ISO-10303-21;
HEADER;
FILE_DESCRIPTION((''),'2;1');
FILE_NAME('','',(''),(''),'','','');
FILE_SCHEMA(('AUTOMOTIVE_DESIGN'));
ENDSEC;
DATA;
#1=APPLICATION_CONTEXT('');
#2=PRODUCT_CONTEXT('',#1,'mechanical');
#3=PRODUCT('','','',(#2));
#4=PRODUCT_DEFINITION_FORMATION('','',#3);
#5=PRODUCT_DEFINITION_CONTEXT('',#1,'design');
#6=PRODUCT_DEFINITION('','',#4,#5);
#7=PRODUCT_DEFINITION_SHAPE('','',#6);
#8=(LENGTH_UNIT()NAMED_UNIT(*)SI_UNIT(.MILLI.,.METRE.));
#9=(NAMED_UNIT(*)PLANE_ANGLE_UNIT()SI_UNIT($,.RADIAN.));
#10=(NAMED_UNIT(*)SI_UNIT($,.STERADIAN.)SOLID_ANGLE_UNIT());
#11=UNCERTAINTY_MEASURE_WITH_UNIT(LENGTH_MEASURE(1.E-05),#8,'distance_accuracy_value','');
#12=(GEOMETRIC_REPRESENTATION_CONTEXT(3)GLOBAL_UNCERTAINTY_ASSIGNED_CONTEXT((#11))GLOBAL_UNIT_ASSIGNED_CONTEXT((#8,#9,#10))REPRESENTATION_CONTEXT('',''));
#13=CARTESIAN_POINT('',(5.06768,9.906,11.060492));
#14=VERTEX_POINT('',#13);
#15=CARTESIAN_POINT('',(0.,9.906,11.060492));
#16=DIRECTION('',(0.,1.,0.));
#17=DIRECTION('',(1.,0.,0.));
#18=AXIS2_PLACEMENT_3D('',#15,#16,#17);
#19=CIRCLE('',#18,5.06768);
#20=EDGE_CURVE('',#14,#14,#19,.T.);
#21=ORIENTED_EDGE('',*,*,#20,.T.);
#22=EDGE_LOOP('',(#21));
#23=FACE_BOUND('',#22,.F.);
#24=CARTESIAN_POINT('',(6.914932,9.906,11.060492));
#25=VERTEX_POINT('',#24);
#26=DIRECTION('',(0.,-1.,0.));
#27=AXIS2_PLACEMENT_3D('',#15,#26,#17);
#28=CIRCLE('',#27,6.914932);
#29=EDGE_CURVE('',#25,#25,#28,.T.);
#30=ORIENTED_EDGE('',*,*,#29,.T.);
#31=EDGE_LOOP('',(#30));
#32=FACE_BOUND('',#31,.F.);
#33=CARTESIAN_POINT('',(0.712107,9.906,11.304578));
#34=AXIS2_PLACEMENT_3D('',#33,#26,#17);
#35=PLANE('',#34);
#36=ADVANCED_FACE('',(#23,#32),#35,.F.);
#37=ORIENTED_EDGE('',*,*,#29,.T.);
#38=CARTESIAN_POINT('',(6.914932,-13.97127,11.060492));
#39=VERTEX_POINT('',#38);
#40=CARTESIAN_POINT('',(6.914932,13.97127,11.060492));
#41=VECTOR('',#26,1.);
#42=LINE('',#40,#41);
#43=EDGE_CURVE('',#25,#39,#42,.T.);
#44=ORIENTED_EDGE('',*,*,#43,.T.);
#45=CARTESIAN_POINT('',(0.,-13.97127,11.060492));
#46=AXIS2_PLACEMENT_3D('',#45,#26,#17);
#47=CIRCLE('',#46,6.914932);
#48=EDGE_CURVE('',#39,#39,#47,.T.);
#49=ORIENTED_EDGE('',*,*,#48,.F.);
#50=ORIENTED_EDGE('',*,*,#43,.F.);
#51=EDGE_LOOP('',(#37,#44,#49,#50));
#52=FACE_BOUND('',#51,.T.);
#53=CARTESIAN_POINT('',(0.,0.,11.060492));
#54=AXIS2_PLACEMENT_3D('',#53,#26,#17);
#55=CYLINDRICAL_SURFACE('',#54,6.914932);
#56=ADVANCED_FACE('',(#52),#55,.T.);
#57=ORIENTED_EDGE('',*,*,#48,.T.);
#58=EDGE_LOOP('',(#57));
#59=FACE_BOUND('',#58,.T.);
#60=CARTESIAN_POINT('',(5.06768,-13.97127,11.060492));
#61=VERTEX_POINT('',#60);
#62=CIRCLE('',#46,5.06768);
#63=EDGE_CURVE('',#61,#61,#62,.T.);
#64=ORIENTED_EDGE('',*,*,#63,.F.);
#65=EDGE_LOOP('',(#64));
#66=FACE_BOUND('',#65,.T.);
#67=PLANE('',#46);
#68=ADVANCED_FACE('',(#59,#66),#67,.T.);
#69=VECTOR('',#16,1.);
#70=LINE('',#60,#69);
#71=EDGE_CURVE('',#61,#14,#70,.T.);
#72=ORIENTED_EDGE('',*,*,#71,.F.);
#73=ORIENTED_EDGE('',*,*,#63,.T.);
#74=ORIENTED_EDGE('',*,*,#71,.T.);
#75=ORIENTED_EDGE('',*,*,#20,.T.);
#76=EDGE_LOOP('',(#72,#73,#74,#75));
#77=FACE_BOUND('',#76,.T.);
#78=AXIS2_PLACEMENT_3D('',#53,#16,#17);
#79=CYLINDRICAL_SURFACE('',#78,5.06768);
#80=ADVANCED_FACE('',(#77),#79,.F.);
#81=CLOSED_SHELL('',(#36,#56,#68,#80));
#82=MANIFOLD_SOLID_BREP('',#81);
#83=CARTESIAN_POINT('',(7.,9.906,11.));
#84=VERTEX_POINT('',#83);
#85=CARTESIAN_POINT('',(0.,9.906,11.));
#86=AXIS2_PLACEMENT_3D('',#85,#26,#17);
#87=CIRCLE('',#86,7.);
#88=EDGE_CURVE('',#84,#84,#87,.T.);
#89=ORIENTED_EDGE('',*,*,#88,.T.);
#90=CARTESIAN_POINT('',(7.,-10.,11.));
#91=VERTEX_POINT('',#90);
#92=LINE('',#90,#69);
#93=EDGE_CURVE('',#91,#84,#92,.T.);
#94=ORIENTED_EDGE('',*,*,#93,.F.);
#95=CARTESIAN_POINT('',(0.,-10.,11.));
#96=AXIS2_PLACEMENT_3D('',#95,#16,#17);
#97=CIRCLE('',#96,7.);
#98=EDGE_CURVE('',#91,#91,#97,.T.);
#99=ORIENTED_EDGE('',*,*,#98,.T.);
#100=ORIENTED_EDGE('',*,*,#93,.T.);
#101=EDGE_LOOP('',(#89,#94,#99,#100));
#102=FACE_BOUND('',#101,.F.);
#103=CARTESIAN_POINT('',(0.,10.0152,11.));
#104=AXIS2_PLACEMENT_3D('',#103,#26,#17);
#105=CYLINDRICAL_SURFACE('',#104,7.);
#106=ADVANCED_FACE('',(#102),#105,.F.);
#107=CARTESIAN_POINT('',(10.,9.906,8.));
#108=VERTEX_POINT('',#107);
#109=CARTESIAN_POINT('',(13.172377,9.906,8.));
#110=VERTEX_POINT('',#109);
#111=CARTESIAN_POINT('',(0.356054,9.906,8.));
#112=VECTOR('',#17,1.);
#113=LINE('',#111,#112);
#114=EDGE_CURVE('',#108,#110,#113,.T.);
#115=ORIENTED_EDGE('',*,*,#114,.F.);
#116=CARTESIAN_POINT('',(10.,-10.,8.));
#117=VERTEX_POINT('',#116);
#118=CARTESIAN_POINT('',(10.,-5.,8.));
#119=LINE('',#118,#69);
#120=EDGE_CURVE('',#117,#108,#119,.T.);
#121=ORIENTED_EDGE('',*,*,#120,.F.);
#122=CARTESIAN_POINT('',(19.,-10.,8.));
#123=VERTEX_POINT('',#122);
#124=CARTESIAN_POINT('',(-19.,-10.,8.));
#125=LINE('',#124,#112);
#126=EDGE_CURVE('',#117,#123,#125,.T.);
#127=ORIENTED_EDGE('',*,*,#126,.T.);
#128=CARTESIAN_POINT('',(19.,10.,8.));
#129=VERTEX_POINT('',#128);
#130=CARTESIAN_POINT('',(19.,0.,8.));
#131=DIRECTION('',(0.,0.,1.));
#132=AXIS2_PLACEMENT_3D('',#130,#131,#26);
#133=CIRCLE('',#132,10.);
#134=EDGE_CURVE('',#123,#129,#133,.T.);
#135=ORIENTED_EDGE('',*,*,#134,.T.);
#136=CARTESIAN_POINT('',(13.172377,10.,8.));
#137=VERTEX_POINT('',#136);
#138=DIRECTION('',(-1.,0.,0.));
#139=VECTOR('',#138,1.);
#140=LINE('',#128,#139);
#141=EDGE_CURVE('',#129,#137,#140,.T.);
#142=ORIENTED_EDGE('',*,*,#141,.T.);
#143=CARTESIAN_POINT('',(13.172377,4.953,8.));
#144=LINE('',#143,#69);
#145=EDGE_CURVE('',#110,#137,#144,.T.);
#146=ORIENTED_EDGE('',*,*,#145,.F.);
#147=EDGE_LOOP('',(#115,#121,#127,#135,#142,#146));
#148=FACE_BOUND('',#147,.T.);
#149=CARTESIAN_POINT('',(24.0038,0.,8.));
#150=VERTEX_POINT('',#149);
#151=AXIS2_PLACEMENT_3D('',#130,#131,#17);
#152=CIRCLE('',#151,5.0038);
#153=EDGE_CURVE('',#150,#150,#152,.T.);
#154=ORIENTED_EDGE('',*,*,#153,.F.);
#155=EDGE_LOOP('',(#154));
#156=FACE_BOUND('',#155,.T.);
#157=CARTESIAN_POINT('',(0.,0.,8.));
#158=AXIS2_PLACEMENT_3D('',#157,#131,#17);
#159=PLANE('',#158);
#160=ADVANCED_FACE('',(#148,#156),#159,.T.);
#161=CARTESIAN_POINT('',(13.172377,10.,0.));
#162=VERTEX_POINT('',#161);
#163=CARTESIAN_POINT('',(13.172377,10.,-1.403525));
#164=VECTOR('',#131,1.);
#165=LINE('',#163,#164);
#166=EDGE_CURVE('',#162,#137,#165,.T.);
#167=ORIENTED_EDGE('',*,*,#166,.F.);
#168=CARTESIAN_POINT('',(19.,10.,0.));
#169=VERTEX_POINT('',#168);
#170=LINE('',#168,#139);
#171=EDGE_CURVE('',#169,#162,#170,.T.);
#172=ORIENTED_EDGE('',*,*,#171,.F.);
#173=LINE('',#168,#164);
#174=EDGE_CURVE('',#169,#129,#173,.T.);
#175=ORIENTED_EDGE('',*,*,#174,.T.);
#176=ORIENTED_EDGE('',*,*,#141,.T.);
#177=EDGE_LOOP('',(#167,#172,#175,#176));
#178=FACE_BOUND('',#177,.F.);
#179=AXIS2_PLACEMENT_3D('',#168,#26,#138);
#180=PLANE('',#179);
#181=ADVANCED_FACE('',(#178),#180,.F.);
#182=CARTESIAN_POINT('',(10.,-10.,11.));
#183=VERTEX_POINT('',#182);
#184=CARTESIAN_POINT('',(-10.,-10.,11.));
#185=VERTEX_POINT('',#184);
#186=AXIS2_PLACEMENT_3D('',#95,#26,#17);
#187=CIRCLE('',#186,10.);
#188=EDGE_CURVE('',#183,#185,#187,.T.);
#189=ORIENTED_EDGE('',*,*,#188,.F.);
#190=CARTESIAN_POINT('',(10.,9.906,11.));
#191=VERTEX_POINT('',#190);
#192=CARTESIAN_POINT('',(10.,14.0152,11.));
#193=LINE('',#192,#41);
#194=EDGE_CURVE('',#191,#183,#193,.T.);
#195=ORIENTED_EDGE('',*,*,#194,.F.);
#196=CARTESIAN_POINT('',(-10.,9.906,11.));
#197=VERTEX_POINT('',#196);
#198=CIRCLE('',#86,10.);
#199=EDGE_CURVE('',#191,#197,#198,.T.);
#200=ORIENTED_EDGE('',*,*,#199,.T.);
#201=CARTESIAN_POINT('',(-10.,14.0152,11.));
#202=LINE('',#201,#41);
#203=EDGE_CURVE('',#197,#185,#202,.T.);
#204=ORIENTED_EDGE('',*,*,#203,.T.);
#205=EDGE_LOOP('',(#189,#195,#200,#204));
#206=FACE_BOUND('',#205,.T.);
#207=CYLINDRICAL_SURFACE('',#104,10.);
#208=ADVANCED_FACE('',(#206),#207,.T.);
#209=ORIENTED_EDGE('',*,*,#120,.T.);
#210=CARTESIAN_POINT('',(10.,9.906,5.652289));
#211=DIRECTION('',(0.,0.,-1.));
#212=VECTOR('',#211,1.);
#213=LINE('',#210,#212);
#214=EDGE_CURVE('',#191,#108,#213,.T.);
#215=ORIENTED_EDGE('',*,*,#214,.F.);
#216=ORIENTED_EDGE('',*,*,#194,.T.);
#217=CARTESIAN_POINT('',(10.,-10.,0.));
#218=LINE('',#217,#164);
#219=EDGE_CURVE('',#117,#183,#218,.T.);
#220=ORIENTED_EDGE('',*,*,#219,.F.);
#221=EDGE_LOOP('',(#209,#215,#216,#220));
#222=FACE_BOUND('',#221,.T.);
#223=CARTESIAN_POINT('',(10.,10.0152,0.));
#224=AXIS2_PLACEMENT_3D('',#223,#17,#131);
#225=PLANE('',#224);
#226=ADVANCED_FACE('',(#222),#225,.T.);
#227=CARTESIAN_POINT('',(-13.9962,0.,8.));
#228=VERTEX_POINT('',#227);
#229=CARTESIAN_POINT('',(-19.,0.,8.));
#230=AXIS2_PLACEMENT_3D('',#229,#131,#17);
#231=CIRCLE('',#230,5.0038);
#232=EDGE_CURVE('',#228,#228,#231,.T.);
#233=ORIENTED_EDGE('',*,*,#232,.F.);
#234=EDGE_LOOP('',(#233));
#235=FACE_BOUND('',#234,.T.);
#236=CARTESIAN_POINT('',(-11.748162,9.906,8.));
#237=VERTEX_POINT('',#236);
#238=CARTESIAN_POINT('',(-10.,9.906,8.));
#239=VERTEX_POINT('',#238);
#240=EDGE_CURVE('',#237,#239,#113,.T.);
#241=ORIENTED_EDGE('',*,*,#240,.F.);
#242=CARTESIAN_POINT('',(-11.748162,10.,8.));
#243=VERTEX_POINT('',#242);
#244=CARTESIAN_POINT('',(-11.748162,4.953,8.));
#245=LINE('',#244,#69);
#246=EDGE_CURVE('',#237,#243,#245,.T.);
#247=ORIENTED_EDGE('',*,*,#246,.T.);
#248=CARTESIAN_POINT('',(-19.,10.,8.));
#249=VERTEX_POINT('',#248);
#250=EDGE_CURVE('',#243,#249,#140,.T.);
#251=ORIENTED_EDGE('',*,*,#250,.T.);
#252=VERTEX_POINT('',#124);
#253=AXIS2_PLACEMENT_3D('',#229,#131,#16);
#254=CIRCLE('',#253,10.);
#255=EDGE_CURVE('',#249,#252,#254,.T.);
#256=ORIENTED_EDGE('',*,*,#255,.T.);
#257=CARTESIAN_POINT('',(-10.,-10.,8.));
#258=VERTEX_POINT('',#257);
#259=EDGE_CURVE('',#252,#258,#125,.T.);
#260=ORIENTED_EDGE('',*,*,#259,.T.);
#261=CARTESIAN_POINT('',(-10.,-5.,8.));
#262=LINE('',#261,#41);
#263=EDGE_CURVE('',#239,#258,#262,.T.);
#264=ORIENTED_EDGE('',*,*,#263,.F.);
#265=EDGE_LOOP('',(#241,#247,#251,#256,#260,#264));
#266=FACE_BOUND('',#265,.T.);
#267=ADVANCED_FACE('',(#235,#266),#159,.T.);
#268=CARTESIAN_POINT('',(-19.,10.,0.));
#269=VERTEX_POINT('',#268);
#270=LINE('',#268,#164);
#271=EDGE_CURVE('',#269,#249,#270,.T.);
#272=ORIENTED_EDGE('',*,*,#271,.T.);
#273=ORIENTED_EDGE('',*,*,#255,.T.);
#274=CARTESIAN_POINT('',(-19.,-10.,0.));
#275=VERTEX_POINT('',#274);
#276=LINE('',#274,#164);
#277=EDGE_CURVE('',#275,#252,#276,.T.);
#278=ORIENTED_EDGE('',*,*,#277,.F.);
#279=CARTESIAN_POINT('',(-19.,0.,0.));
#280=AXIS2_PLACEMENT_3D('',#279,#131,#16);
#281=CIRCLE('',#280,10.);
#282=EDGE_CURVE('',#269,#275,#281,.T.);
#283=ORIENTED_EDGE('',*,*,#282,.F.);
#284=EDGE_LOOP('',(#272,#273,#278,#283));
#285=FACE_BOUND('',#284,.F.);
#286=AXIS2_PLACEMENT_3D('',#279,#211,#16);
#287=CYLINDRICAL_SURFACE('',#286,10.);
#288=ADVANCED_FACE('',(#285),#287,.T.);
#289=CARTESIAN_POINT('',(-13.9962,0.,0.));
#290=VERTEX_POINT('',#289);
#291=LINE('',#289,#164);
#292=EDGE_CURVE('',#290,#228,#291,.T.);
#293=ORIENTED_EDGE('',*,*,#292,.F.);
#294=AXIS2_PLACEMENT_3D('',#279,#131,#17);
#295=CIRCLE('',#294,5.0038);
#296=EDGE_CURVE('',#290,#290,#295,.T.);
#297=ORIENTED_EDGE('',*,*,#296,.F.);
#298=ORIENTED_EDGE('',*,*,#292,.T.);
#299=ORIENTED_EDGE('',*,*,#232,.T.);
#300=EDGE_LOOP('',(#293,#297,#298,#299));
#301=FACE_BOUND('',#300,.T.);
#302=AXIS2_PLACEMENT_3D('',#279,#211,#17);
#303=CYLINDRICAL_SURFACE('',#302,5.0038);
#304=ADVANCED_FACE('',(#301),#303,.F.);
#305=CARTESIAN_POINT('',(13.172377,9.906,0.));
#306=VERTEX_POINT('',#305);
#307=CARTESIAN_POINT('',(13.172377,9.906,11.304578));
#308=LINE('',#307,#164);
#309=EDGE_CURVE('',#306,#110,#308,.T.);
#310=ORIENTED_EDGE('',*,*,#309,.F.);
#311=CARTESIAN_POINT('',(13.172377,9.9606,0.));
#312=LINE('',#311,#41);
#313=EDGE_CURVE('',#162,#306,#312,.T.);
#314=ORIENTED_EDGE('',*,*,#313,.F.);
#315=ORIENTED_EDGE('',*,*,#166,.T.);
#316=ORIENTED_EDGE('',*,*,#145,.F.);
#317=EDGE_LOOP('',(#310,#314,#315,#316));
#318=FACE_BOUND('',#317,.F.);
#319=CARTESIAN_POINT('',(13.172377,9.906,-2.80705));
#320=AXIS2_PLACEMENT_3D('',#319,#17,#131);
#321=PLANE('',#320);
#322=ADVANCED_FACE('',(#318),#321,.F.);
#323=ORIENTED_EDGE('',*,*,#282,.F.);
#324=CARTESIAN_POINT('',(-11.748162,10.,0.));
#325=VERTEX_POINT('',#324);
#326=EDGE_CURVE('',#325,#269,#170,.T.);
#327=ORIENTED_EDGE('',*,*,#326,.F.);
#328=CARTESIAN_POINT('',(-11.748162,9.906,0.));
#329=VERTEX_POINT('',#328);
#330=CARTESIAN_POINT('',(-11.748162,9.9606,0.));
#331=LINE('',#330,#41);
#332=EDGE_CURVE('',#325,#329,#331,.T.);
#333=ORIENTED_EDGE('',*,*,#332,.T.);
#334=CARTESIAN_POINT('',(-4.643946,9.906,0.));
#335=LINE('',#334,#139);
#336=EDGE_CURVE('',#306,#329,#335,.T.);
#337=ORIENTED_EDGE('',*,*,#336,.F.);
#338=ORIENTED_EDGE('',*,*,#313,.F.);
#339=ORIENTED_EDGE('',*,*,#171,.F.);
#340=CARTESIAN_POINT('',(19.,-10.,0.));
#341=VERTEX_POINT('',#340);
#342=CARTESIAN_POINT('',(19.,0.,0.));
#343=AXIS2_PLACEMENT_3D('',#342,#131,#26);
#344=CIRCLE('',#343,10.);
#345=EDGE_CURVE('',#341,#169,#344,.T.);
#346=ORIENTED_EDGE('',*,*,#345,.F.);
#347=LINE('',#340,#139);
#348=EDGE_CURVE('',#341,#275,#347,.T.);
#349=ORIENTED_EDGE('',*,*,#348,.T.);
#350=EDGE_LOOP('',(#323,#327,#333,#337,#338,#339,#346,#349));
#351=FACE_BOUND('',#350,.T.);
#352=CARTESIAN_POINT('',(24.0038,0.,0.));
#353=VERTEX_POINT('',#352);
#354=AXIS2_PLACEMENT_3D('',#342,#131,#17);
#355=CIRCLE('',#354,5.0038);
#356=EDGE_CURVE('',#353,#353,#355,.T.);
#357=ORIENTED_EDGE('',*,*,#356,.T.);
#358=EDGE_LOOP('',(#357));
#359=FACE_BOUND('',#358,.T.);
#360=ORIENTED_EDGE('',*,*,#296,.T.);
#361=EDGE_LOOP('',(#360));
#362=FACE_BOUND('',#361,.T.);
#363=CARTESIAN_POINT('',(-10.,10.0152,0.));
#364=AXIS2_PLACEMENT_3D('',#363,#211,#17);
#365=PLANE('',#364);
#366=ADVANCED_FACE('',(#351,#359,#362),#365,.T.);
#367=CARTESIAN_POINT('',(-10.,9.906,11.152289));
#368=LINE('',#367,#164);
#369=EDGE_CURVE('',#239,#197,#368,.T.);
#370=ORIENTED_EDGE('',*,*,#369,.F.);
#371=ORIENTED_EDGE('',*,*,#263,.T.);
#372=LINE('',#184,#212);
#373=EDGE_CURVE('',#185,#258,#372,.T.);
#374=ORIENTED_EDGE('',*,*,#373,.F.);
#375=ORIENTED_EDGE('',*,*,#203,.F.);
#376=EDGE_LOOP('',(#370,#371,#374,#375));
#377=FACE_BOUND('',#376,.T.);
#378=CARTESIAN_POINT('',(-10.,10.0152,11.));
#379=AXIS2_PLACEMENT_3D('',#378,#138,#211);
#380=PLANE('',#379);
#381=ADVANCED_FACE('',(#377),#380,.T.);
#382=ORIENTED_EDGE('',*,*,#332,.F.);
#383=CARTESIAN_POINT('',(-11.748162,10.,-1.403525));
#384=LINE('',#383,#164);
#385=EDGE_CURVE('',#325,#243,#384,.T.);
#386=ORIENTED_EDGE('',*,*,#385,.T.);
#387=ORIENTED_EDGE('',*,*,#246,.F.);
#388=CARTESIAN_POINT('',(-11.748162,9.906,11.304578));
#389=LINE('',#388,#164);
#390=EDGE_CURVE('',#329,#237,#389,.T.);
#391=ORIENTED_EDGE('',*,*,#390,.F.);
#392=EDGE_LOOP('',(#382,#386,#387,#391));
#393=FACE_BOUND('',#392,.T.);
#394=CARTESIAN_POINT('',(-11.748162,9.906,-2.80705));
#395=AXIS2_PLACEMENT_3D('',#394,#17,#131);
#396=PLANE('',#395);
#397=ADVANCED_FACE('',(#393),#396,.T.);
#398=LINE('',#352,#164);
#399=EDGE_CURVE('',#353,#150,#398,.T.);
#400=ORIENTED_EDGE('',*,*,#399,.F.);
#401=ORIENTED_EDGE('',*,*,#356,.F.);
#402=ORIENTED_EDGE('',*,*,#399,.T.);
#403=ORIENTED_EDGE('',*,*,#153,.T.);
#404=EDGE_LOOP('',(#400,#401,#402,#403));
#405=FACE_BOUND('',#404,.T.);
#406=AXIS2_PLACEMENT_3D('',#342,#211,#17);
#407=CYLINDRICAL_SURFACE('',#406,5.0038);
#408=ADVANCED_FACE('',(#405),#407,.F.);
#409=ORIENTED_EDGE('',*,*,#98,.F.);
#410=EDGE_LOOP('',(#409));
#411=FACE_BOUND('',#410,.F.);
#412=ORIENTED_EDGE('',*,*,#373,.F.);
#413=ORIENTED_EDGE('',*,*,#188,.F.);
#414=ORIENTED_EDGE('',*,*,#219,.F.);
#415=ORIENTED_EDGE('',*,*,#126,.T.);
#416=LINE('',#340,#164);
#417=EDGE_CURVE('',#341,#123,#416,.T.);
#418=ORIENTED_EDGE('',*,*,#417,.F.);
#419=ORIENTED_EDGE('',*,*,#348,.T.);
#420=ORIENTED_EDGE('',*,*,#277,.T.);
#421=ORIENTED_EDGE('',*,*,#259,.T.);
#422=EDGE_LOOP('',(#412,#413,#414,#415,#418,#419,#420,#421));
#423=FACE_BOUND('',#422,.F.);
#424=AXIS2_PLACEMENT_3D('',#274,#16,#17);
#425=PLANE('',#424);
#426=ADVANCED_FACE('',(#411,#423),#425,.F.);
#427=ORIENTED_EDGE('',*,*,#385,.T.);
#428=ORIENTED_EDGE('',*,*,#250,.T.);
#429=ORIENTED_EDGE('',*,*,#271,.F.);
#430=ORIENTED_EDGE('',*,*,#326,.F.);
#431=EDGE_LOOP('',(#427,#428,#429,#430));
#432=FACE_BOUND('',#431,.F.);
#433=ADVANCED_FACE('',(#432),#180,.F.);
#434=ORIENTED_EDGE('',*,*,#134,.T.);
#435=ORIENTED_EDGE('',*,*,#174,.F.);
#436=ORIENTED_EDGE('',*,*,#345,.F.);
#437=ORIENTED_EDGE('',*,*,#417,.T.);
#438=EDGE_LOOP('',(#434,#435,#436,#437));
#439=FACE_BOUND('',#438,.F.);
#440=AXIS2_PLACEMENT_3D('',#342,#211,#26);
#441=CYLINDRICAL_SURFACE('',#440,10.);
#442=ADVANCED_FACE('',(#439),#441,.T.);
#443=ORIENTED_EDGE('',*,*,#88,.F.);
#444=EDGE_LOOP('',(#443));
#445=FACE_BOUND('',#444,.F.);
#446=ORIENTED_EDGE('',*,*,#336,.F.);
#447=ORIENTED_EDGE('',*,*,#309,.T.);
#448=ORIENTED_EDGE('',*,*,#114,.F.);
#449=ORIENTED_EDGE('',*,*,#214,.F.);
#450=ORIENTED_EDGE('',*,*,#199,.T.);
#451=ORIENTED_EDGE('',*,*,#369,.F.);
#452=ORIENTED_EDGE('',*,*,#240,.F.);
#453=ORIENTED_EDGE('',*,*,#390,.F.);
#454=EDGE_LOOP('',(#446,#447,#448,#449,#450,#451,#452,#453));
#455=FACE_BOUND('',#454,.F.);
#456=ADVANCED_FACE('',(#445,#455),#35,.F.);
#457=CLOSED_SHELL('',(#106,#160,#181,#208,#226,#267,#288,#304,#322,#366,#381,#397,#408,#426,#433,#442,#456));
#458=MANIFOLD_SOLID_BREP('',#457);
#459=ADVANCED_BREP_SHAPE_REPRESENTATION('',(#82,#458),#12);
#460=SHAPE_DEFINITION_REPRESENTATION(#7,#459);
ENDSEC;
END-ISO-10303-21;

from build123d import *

# Parameters (mm, degrees)
F0_R      = 5.0038
F1_DEPTH  = 8
F3_R      = 7
F4_DEPTH  = 10.001
F5_DEPTH  = 25.4
F2_R      = 7
F6_DEPTH  = 20.0152
F7_DEPTH  = 4
F8_R      = 6.9149317759
F8_R_2    = 5.0676799546
F9_DEPTH  = 13.97127
F11_W     = 24.9205389991
F11_H     = 28.2232568134
F12_DEPTH = 25.4


# Not quite as in the source:
# - a feature of the source that left no trace in its solid (it failed there, or was rolled back) is left out


with BuildPart() as f1:
    # F0 (on Top) → F1 (new body)
    with BuildSketch(Plane.XY):
        with BuildLine():
            ThreePointArc((-19, 10), (-29, 0), (-19, -10))
            Line((-19, -10), (19, -10))
            ThreePointArc((19, -10), (29, 0), (19, 10))
            Line((19, 10), (-19, 10))
        make_face()
        with Locations((-19, 0)):
            Circle(F0_R, mode=Mode.SUBTRACT)
        with Locations((19, 0)):
            Circle(F0_R, mode=Mode.SUBTRACT)
    extrude(amount=F1_DEPTH)

    # F3 (on Front) → F4 (cut, through all)
    with BuildSketch(Plane.XZ):
        with Locations((0, 11)):
            Circle(F3_R)
    extrude(amount=-F4_DEPTH, mode=Mode.SUBTRACT)

    # F5 (cut): a face of the model
    f5_faces = [f1.faces().sort_by_distance(p)[0] for p in [
        (0, 0, 6.3529291392),
    ]]
    extrude(f5_faces, amount=-F5_DEPTH, mode=Mode.SUBTRACT)

    # F2 (on face) → F6 (join)
    with BuildSketch(Plane.XZ.offset(10)):
        with BuildLine():
            Line((10, 0), (10, 8))
            Line((10, 8), (10, 11))
            ThreePointArc((10, 11), (0, 21), (-10, 11))
            Line((-10, 11), (-10, 8))
            Line((-10, 8), (-10, 0))
            Line((-10, 0), (10, 0))
        make_face()
        with Locations((0, 11)):
            Circle(F2_R, mode=Mode.SUBTRACT)
    extrude(amount=-F6_DEPTH)

    # F7 (add): a face of the model
    f7_faces = [f1.faces().sort_by_distance(p)[0] for p in [
        (9.71, 10.0152, 5.5),
    ]]
    extrude(f7_faces, amount=F7_DEPTH)


with BuildPart() as f9:
    # F8 (on Front) → F9 (new body, symmetric)
    with BuildSketch(Plane.XZ):
        with Locations((0, 11.0604921356)):
            Circle(F8_R)
        with Locations((0, 11.0604921356)):
            Circle(F8_R_2, mode=Mode.SUBTRACT)
    extrude(amount=F9_DEPTH, both=True)


with BuildPart() as f12_tool:
    # F11 (on offset) → F12 (new body)
    with BuildSketch(Plane.XZ.offset(-9.906)):
        with Locations((0.7121074013, 11.3045781618)):
            Rectangle(F11_W, F11_H)
    extrude(amount=-F12_DEPTH)


with BuildPart() as f1_1:
    add(f1.part)

    # F12: cut by f12_tool
    add(f12_tool.part, mode=Mode.SUBTRACT)


with BuildPart() as f9_1:
    add(f9.part)

    # F12: cut by f12_tool
    add(f12_tool.part, mode=Mode.SUBTRACT)


solid = Compound([f1_1.part, f9_1.part])
